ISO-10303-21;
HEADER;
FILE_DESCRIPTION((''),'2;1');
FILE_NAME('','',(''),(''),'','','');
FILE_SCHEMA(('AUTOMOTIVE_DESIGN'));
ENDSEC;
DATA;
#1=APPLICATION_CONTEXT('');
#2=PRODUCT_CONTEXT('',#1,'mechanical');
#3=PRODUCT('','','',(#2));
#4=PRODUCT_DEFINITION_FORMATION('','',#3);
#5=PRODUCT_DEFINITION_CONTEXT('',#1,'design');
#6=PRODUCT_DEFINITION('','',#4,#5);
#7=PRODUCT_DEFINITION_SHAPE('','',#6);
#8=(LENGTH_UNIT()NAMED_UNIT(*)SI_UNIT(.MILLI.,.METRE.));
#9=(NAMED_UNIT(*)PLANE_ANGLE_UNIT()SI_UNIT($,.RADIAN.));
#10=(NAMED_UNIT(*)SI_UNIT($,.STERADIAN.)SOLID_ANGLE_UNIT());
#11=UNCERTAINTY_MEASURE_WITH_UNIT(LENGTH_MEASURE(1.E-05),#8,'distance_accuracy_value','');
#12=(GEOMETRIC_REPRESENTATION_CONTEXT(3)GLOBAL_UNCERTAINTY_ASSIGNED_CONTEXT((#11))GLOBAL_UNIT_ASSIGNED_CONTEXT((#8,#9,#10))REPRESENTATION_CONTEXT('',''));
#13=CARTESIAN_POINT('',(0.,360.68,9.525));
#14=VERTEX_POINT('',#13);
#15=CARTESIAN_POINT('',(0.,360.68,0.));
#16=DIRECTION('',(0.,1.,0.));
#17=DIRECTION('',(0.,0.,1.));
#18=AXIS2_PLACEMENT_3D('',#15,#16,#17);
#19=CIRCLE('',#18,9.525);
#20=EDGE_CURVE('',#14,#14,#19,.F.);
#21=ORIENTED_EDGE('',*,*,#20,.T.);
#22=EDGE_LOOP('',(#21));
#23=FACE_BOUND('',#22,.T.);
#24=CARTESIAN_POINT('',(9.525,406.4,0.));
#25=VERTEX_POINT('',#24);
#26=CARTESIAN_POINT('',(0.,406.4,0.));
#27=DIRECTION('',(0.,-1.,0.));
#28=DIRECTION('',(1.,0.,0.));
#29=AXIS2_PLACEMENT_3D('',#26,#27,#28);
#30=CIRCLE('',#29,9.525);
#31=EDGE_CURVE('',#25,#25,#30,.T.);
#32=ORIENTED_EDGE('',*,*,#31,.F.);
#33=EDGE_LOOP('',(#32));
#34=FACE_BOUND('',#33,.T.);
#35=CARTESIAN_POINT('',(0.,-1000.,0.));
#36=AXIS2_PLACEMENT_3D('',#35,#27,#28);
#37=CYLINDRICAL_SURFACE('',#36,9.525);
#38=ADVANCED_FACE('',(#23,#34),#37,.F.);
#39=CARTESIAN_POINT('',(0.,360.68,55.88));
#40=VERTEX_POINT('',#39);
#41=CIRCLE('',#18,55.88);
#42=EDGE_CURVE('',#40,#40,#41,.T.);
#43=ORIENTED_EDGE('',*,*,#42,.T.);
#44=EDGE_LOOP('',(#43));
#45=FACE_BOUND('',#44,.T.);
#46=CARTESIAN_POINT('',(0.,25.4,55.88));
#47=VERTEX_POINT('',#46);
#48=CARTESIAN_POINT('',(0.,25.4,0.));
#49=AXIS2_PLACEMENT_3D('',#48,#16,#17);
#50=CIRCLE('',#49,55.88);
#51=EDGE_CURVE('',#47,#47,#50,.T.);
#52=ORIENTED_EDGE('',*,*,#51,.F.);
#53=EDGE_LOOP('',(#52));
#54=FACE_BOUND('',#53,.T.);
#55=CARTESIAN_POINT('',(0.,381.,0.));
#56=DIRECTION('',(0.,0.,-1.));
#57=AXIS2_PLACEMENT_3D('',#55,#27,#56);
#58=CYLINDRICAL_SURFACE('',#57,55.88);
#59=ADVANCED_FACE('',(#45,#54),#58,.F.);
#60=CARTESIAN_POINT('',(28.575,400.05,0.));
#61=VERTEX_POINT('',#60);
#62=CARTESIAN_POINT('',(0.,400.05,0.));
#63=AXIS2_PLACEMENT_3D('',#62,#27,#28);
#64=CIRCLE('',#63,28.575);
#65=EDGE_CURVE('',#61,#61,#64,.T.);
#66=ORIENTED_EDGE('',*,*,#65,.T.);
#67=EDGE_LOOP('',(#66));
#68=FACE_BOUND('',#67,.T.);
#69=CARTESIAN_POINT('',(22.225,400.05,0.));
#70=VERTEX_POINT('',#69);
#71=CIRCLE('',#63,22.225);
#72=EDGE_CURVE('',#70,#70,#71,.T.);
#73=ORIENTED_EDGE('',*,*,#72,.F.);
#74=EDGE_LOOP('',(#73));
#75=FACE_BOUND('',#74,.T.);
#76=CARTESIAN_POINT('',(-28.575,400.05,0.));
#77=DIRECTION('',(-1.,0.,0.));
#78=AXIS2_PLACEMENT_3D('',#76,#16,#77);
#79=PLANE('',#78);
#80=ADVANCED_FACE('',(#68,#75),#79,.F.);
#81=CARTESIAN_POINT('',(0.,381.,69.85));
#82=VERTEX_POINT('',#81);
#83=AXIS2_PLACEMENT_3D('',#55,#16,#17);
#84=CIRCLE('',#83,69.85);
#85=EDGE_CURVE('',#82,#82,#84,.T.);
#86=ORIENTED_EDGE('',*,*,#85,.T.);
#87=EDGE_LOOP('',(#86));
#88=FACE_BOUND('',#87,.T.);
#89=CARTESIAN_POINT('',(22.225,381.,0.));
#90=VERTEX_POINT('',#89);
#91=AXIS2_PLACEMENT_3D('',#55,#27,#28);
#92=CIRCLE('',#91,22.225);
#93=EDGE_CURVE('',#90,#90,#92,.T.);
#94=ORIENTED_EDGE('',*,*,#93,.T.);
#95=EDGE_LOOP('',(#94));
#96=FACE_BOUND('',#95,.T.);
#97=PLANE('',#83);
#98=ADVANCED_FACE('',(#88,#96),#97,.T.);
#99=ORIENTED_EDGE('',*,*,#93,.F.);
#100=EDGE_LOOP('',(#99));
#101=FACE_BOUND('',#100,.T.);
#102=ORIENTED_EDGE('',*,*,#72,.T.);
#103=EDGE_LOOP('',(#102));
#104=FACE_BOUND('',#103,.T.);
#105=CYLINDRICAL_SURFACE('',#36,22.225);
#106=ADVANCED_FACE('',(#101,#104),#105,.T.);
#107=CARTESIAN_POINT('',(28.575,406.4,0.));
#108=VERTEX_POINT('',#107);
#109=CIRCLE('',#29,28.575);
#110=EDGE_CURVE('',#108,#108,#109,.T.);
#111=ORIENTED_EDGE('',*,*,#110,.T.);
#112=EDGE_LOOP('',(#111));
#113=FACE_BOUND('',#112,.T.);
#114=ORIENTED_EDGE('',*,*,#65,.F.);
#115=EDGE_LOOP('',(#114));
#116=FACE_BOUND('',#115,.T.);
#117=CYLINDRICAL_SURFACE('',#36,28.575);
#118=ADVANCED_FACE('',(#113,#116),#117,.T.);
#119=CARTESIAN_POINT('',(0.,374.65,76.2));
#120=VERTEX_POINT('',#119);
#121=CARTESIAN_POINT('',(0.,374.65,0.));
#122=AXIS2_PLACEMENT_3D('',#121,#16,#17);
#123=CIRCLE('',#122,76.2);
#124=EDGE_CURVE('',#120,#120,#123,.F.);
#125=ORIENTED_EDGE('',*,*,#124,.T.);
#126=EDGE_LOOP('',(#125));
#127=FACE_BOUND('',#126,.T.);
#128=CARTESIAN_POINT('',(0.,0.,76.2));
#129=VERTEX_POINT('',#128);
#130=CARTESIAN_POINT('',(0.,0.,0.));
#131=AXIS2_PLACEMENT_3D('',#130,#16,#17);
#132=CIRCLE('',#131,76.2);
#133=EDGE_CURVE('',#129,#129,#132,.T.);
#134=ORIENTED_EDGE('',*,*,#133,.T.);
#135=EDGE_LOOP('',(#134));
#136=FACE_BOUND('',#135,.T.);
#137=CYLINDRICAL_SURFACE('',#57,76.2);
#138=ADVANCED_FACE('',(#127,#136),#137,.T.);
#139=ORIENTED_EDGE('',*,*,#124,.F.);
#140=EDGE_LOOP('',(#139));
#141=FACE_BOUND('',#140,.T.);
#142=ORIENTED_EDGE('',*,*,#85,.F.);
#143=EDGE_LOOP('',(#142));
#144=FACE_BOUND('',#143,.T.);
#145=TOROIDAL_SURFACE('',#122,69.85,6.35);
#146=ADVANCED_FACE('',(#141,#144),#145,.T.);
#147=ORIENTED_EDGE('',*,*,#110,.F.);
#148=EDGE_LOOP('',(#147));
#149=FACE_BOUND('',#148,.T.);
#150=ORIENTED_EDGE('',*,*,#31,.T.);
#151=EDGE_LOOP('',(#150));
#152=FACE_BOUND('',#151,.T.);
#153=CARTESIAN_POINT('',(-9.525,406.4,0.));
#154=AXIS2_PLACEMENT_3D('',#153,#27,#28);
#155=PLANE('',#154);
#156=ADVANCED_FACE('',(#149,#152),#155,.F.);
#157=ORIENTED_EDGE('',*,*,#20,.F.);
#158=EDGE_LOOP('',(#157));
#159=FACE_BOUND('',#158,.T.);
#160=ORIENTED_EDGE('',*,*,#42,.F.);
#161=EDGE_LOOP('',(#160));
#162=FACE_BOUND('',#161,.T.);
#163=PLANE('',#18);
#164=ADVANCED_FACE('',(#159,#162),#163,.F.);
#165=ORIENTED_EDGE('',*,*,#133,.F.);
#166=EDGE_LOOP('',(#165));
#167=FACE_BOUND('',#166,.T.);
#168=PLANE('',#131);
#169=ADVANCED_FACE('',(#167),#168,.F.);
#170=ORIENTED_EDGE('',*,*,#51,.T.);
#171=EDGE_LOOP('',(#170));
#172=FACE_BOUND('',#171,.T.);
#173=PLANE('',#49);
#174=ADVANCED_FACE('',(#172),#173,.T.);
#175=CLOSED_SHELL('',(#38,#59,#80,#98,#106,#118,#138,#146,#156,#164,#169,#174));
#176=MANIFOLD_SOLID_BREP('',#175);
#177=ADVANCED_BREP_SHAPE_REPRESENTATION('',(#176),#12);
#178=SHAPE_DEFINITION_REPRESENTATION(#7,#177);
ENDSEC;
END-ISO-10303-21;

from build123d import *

# Parameters (mm, degrees)
SKETCH1_R           = 76.2
BOSS_EXTRUDE1_DEPTH = 381
FILLET1_R           = 6.35
SHELL4_START        = 25.4
SHELL4_OUTLINE_R    = 55.88
SHELL4_DEPTH        = 335.28
SKETCH3_R           = 9.525
CUT_EXTRUDE1_DEPTH  = 20.32


# Read off the part's stored shape, not the designer's step: Shell4
with BuildPart() as part:
    # Sketch1 → Boss-Extrude1 (new body)
    with BuildSketch(Plane(origin=(0, 0, 0), x_dir=(1, 0, 0), z_dir=(0, 1, 0))):
        with Locations(Location((0, 0, 0), (0, 0, 270))):
            Circle(SKETCH1_R)
    extrude(amount=BOSS_EXTRUDE1_DEPTH)

    # Fillet1
    fillet1_edges = [part.edges().sort_by_distance(p)[0] for p in [
        (0, 381, -76.2),
    ]]
    fillet(fillet1_edges, radius=FILLET1_R)

    # Sketch2 → Revolve1 (revolve)
    with BuildSketch(Plane.XY, mode=Mode.PRIVATE) as revolve1_sk:
        Polygon((-9.525, 381), (-9.525, 406.4), (-28.575, 406.4), (-28.575, 400.05), (-22.225, 400.05), (-22.225, 381), align=None)
    revolve(revolve1_sk.sketch.rotate(Axis((0, -1000, 0), (0, 1, 0)), 180), axis=Axis((0, -1000, 0), (0, 1, 0)))

    # Shell4 outline → Shell4 (cut)
    with BuildSketch(Plane(origin=(0, 0, 0), x_dir=(1, 0, 0), z_dir=(0, 1, 0)).offset(SHELL4_START)):
        Circle(SHELL4_OUTLINE_R)
    extrude(amount=SHELL4_DEPTH, mode=Mode.SUBTRACT)

    # Sketch3 → Cut-Extrude1 (cut)
    with BuildSketch(Plane(origin=(0, 381, 0), x_dir=(1, 0, 0), z_dir=(0, 1, 0))):
        Circle(SKETCH3_R)
    extrude(amount=-CUT_EXTRUDE1_DEPTH, mode=Mode.SUBTRACT)


solid = part.part
